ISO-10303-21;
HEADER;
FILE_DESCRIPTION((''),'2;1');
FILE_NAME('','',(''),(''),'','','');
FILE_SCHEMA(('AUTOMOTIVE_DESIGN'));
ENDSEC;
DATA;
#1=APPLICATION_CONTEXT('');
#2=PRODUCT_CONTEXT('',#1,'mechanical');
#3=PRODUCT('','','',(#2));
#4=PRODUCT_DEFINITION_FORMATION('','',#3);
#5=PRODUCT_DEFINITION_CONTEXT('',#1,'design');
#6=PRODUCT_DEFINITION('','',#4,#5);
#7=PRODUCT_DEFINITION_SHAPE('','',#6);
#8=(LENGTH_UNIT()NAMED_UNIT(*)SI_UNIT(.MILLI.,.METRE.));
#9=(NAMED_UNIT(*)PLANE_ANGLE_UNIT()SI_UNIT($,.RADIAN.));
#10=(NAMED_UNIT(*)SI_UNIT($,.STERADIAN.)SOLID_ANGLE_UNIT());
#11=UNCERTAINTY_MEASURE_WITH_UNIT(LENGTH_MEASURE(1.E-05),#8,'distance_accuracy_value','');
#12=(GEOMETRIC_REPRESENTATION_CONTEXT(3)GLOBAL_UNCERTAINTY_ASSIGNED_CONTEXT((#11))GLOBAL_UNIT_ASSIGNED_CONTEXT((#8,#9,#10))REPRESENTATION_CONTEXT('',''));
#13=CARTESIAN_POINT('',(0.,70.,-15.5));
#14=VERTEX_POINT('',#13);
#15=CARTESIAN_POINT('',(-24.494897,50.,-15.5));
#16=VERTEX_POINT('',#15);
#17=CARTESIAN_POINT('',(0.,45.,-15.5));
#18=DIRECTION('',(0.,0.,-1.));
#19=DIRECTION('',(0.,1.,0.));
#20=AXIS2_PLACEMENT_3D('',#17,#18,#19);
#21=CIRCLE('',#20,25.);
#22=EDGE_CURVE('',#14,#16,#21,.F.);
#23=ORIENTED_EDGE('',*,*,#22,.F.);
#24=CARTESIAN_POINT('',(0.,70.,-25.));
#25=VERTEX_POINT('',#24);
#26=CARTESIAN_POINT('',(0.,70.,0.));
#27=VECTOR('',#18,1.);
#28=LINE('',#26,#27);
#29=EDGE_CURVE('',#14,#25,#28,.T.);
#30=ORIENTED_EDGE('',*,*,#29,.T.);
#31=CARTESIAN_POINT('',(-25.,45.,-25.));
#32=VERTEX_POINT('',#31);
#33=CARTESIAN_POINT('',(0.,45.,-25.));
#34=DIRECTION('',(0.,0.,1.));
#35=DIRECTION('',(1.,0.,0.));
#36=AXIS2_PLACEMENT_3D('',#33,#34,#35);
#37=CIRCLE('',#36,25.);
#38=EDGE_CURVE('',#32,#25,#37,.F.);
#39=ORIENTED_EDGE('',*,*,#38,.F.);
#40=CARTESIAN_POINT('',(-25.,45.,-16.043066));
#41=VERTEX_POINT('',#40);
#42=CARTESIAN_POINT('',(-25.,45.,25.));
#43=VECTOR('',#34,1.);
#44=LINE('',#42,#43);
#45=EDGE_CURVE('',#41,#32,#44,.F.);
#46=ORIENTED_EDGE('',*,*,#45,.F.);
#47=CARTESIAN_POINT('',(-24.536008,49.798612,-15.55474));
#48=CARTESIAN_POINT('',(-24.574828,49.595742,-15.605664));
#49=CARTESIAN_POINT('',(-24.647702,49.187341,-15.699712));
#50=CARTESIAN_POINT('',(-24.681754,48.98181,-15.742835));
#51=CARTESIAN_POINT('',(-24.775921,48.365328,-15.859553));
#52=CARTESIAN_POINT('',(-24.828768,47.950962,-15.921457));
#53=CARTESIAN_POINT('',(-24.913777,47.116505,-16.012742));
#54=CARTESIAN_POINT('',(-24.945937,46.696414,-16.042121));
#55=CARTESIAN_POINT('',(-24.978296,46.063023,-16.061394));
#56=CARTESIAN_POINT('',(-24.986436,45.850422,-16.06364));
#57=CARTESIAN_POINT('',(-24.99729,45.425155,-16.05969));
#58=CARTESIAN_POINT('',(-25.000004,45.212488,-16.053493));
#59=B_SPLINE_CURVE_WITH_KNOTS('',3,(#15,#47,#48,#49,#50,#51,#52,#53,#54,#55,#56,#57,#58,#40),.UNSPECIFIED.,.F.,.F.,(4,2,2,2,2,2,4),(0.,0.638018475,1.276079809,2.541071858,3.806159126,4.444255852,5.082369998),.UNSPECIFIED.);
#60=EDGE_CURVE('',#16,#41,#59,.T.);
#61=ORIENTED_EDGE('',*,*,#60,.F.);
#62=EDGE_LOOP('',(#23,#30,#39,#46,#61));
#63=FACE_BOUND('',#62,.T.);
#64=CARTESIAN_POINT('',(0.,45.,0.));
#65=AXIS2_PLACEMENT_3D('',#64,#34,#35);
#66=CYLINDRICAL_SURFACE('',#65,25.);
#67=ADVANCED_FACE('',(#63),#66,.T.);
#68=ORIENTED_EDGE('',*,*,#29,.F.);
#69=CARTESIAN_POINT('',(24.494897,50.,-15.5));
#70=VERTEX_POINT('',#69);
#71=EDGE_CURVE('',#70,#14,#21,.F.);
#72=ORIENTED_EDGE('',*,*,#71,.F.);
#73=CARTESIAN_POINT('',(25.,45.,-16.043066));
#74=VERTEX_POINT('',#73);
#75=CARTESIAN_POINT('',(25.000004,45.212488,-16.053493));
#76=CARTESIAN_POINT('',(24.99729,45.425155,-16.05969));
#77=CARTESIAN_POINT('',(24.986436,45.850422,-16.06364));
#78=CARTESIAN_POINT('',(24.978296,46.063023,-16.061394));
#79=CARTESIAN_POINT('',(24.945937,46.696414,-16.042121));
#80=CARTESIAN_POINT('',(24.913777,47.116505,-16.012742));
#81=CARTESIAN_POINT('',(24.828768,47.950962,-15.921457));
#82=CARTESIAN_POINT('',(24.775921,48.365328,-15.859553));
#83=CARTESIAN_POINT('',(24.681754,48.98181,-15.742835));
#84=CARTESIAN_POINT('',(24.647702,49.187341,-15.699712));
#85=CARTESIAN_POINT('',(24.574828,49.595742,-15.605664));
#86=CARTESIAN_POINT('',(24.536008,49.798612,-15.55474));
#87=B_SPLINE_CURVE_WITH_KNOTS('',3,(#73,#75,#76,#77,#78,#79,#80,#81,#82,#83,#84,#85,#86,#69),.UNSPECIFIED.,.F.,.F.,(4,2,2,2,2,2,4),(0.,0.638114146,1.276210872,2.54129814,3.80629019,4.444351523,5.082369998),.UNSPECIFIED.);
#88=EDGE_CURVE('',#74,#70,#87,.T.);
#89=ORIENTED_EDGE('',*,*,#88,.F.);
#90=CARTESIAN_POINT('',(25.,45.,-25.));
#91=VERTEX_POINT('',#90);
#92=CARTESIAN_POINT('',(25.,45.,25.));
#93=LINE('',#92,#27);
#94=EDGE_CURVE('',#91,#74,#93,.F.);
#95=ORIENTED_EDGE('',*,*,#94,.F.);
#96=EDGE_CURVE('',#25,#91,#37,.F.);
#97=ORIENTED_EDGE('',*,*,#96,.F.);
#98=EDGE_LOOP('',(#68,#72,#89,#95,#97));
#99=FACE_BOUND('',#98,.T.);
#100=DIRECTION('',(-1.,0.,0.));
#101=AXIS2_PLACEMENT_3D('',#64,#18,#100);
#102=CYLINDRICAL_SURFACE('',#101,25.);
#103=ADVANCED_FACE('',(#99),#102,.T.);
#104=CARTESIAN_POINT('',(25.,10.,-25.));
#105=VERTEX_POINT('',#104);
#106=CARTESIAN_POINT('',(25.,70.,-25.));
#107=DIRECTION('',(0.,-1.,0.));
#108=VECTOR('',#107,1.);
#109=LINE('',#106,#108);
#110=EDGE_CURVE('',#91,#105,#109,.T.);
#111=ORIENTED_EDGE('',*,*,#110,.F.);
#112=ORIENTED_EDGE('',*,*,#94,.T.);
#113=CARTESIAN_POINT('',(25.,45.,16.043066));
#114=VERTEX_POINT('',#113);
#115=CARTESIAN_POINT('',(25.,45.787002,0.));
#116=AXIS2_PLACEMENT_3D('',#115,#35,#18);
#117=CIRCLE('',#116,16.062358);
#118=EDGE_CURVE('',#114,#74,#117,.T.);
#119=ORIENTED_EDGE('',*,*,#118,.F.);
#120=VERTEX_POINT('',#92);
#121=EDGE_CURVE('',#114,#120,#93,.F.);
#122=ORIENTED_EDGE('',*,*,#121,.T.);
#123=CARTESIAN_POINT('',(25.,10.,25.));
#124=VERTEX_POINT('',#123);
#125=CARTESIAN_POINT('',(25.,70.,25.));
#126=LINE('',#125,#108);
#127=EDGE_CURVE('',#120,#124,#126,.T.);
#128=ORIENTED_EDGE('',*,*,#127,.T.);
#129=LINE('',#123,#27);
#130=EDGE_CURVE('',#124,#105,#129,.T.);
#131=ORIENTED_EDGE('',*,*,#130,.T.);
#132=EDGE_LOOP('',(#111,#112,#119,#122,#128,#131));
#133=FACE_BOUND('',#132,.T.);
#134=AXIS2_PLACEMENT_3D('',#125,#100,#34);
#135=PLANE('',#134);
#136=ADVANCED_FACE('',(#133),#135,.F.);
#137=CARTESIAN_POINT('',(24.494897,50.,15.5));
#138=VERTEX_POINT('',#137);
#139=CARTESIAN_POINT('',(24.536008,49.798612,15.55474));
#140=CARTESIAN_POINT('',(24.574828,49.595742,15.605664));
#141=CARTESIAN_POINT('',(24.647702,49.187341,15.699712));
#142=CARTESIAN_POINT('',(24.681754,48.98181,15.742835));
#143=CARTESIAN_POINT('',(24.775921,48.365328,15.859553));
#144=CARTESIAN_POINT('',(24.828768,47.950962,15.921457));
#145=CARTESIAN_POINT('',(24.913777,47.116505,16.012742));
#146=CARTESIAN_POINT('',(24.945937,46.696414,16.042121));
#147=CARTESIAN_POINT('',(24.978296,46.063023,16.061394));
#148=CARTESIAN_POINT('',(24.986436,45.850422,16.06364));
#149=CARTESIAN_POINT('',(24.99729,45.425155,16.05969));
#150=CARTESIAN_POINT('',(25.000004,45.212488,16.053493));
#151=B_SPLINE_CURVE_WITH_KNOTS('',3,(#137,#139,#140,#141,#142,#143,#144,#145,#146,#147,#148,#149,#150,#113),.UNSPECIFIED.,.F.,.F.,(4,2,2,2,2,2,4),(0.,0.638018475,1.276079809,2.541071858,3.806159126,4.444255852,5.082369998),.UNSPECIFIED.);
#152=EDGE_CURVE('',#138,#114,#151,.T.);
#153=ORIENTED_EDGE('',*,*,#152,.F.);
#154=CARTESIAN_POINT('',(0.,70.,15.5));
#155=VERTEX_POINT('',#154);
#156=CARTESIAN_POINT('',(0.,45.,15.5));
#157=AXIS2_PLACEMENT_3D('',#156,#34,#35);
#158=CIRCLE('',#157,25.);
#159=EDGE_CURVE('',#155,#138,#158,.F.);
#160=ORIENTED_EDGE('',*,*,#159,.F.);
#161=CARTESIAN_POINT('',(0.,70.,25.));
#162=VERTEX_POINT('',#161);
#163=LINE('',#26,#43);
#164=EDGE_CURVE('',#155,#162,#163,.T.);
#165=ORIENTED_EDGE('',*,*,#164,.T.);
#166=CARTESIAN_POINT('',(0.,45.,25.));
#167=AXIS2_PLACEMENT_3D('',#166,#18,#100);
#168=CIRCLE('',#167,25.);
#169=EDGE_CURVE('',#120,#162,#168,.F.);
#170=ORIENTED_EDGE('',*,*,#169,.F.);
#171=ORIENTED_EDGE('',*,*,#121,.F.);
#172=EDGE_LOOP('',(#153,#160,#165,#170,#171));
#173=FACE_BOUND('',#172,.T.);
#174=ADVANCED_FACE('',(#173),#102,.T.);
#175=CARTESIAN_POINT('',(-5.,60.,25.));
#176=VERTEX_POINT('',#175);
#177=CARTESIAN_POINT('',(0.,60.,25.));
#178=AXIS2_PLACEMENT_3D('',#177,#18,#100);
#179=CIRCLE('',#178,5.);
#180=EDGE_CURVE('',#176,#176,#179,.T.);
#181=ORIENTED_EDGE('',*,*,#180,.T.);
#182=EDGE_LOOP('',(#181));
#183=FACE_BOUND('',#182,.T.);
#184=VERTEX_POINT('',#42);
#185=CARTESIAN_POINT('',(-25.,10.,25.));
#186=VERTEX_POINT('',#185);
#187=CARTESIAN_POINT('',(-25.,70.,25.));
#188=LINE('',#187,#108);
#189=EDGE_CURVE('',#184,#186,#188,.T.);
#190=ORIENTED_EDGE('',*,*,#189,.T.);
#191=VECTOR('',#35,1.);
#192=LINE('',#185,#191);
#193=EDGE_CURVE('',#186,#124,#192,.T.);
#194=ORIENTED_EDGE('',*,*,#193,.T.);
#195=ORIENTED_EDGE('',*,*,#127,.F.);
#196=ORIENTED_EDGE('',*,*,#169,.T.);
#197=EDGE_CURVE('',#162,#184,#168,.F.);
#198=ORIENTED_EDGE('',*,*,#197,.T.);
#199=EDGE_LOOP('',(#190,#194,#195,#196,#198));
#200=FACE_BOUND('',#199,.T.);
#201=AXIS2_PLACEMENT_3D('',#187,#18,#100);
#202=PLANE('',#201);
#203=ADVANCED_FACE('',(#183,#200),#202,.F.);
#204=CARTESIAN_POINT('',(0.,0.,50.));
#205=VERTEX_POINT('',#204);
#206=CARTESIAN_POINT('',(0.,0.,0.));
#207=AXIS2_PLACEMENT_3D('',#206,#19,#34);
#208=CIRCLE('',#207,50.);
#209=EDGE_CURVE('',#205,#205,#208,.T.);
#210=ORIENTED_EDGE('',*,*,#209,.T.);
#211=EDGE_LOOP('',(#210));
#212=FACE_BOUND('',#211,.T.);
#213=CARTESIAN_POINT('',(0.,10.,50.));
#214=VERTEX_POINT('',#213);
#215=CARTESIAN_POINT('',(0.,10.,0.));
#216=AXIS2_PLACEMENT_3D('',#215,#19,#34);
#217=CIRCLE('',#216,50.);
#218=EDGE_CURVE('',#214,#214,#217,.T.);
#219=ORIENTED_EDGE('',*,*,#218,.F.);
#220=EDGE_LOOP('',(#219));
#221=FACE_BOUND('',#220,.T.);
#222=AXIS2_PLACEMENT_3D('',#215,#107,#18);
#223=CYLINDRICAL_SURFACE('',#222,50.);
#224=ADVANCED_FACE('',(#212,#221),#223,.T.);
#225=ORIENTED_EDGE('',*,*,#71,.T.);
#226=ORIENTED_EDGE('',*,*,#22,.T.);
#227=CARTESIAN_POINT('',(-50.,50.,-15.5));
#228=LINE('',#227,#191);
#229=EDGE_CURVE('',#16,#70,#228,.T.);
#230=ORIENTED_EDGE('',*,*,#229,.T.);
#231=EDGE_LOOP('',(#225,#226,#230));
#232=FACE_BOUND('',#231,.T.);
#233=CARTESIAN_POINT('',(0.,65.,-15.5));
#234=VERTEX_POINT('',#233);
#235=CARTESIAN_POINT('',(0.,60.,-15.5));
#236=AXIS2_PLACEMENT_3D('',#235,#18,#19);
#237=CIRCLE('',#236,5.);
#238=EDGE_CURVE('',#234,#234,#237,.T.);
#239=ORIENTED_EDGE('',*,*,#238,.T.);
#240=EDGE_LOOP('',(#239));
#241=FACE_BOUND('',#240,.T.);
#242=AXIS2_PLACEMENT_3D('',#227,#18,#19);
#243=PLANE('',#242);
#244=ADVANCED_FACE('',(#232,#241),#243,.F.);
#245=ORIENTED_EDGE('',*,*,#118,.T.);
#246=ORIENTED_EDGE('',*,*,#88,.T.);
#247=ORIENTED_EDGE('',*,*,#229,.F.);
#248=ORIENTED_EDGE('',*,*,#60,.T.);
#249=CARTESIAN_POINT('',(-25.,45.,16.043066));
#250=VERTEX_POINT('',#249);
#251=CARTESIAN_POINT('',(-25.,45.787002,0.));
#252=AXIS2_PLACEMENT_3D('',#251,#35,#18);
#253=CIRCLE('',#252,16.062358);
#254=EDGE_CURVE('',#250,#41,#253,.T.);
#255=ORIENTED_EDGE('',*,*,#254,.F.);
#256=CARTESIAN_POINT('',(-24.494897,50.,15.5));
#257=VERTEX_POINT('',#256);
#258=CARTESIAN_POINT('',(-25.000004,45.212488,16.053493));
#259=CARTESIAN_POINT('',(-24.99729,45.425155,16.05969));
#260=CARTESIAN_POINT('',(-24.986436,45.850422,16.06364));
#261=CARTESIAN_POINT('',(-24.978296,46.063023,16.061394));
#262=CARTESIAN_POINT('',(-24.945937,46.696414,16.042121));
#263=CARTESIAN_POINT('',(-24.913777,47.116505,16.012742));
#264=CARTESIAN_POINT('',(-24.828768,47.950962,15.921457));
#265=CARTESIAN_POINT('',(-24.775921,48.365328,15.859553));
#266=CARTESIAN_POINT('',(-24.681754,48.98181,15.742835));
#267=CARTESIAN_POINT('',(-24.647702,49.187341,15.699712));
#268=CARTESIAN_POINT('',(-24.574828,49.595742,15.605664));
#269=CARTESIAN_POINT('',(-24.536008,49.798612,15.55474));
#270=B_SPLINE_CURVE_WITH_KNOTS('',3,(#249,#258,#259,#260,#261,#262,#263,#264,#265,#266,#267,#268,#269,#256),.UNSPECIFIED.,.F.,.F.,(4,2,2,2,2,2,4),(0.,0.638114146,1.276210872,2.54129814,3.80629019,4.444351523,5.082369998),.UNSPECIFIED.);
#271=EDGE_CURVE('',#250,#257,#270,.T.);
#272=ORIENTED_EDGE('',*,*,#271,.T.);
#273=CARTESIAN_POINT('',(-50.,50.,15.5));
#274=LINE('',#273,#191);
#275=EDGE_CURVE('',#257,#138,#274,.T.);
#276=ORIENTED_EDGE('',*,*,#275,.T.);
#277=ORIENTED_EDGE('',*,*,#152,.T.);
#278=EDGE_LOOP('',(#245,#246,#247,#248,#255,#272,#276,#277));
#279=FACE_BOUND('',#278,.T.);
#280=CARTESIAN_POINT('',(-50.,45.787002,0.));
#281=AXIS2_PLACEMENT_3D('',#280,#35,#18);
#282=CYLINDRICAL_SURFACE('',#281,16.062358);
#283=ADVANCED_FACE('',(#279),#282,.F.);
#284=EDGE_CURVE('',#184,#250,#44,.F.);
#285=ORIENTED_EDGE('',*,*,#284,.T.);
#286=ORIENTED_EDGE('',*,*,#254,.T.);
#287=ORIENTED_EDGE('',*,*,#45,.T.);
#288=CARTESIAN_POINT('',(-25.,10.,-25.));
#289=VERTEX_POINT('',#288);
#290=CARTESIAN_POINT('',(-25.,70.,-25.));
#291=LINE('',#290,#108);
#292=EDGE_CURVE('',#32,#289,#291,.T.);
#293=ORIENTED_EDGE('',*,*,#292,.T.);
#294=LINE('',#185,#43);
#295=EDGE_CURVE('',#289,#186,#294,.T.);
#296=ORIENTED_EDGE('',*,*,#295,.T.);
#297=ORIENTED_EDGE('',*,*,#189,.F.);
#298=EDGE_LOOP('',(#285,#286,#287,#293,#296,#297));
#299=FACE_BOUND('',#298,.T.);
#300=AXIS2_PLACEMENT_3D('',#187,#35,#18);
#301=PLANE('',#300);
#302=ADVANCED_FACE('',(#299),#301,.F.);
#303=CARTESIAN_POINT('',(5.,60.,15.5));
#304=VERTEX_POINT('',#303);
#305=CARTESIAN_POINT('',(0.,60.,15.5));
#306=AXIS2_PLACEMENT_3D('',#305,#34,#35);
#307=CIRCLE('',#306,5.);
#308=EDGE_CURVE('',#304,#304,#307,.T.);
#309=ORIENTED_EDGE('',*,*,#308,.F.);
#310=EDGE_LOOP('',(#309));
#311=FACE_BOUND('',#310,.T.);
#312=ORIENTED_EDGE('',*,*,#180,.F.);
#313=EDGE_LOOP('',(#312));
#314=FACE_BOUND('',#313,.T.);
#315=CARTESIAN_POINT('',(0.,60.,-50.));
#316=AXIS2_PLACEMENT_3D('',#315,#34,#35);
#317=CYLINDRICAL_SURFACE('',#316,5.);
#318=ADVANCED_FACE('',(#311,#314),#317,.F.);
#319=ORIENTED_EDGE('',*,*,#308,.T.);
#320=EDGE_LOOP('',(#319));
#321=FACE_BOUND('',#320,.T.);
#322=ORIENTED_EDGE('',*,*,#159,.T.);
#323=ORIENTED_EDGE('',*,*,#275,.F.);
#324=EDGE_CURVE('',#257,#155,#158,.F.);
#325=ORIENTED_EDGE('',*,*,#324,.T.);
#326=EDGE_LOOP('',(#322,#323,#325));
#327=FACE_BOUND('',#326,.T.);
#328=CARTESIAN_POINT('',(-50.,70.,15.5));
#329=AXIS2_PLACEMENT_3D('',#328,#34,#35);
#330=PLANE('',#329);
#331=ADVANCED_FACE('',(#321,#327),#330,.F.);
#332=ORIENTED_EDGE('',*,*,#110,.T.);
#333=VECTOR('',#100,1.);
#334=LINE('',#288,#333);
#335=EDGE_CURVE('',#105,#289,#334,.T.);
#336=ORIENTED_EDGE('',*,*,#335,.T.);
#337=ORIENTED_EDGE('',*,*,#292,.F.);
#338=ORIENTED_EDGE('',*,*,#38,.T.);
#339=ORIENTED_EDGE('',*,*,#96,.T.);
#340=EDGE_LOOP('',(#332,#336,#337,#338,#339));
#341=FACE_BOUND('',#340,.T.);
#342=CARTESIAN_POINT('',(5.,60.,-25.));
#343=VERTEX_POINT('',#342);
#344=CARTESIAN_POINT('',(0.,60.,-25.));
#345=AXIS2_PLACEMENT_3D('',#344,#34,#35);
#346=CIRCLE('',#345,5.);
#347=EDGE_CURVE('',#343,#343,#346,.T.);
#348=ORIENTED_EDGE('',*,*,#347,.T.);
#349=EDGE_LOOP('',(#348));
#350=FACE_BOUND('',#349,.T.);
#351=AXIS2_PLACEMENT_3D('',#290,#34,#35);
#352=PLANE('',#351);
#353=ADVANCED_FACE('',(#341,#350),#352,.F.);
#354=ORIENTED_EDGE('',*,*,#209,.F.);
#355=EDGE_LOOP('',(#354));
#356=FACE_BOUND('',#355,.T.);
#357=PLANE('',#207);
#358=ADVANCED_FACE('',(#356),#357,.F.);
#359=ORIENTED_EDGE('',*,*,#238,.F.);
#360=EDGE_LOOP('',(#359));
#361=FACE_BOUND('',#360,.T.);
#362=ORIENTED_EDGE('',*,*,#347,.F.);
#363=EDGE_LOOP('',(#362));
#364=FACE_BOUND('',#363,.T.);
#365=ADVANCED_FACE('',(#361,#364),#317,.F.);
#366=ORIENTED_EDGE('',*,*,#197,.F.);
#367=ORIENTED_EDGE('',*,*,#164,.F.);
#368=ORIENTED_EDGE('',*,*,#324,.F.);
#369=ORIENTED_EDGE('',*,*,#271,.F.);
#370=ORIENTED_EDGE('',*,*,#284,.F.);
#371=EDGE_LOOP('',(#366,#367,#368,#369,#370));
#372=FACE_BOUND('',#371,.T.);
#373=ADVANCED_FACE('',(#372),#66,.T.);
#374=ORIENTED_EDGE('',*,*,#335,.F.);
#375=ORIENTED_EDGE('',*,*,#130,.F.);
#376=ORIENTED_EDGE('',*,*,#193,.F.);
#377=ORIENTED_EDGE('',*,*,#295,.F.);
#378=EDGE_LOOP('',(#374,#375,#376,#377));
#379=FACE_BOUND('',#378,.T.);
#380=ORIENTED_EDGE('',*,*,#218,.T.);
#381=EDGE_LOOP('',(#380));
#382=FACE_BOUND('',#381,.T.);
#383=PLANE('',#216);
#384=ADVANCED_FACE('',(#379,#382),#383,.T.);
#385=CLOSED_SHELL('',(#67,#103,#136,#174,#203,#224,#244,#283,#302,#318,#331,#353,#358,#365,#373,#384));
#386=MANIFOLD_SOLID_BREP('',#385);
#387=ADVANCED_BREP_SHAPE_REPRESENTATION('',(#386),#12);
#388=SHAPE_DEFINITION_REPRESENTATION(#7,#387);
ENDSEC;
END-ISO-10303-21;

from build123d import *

# Parameters (mm, degrees)
SKETCH2_R               = 50
BOSS_EXTRUDE1_DEPTH     = 10
SKETCH3_W               = 50
SKETCH3_H               = 50
BOSS_EXTRUDE2_DEPTH     = 60
CUT_EXTRUDE1_DEPTH      = 115.127122105
CUT_EXTRUDE2_DEPTH      = 109.12145948
CUT_EXTRUDE2_DEPTH_BACK = 109.12145948
SKETCH5_R               = 5
FILLET1_R               = 25


with BuildPart() as part:
    # Sketch2 → Boss-Extrude1 (new body)
    with BuildSketch(Plane(origin=(0, 0, 0), x_dir=(1, 0, 0), z_dir=(0, 1, 0))):
        with Locations(Location((0, 0, 0), (0, 0, 270))):
            Circle(SKETCH2_R)
    extrude(amount=BOSS_EXTRUDE1_DEPTH)

    # Sketch3 → Boss-Extrude2 (add)
    with BuildSketch(Plane(origin=(0, 10, 0), x_dir=(1, 0, 0), z_dir=(0, 1, 0))):
        Rectangle(SKETCH3_W, SKETCH3_H)
    extrude(amount=BOSS_EXTRUDE2_DEPTH)

    # Sketch4 → Cut-Extrude1 (cut, through all)
    with BuildSketch(Plane(origin=(25, 0, 0), x_dir=(0, 0, -1), z_dir=(1, 0, 0))):
        with BuildLine():
            Line((-15.5, 70), (15.5, 70))
            Line((15.5, 70), (15.5, 50))
            ThreePointArc((15.5, 50), (0, 29.724643504), (-15.5, 50))
            Line((-15.5, 50), (-15.5, 70))
        make_face()
    extrude(amount=-CUT_EXTRUDE1_DEPTH, mode=Mode.SUBTRACT)

    # Sketch5 → Cut-Extrude2 (cut, two sides: drawn at the far end of the back side and taken through both)
    with BuildSketch(Plane.XY.offset(-15.5).offset(-CUT_EXTRUDE2_DEPTH_BACK)):
        with Locations((0, 60)):
            Circle(SKETCH5_R)
    extrude(amount=CUT_EXTRUDE2_DEPTH + CUT_EXTRUDE2_DEPTH_BACK, mode=Mode.SUBTRACT)

    # Fillet1
    fillet1_edges = [part.edges().sort_by_distance(p)[0] for p in [
        (25, 70, 20.25),
        (-25, 70, 20.25),
        (-25, 70, -20.25),
        (25, 70, -20.25),
    ]]
    fillet(fillet1_edges, radius=FILLET1_R - 0.0001)  # a hair under: the kernel refuses the full size


solid = part.part
